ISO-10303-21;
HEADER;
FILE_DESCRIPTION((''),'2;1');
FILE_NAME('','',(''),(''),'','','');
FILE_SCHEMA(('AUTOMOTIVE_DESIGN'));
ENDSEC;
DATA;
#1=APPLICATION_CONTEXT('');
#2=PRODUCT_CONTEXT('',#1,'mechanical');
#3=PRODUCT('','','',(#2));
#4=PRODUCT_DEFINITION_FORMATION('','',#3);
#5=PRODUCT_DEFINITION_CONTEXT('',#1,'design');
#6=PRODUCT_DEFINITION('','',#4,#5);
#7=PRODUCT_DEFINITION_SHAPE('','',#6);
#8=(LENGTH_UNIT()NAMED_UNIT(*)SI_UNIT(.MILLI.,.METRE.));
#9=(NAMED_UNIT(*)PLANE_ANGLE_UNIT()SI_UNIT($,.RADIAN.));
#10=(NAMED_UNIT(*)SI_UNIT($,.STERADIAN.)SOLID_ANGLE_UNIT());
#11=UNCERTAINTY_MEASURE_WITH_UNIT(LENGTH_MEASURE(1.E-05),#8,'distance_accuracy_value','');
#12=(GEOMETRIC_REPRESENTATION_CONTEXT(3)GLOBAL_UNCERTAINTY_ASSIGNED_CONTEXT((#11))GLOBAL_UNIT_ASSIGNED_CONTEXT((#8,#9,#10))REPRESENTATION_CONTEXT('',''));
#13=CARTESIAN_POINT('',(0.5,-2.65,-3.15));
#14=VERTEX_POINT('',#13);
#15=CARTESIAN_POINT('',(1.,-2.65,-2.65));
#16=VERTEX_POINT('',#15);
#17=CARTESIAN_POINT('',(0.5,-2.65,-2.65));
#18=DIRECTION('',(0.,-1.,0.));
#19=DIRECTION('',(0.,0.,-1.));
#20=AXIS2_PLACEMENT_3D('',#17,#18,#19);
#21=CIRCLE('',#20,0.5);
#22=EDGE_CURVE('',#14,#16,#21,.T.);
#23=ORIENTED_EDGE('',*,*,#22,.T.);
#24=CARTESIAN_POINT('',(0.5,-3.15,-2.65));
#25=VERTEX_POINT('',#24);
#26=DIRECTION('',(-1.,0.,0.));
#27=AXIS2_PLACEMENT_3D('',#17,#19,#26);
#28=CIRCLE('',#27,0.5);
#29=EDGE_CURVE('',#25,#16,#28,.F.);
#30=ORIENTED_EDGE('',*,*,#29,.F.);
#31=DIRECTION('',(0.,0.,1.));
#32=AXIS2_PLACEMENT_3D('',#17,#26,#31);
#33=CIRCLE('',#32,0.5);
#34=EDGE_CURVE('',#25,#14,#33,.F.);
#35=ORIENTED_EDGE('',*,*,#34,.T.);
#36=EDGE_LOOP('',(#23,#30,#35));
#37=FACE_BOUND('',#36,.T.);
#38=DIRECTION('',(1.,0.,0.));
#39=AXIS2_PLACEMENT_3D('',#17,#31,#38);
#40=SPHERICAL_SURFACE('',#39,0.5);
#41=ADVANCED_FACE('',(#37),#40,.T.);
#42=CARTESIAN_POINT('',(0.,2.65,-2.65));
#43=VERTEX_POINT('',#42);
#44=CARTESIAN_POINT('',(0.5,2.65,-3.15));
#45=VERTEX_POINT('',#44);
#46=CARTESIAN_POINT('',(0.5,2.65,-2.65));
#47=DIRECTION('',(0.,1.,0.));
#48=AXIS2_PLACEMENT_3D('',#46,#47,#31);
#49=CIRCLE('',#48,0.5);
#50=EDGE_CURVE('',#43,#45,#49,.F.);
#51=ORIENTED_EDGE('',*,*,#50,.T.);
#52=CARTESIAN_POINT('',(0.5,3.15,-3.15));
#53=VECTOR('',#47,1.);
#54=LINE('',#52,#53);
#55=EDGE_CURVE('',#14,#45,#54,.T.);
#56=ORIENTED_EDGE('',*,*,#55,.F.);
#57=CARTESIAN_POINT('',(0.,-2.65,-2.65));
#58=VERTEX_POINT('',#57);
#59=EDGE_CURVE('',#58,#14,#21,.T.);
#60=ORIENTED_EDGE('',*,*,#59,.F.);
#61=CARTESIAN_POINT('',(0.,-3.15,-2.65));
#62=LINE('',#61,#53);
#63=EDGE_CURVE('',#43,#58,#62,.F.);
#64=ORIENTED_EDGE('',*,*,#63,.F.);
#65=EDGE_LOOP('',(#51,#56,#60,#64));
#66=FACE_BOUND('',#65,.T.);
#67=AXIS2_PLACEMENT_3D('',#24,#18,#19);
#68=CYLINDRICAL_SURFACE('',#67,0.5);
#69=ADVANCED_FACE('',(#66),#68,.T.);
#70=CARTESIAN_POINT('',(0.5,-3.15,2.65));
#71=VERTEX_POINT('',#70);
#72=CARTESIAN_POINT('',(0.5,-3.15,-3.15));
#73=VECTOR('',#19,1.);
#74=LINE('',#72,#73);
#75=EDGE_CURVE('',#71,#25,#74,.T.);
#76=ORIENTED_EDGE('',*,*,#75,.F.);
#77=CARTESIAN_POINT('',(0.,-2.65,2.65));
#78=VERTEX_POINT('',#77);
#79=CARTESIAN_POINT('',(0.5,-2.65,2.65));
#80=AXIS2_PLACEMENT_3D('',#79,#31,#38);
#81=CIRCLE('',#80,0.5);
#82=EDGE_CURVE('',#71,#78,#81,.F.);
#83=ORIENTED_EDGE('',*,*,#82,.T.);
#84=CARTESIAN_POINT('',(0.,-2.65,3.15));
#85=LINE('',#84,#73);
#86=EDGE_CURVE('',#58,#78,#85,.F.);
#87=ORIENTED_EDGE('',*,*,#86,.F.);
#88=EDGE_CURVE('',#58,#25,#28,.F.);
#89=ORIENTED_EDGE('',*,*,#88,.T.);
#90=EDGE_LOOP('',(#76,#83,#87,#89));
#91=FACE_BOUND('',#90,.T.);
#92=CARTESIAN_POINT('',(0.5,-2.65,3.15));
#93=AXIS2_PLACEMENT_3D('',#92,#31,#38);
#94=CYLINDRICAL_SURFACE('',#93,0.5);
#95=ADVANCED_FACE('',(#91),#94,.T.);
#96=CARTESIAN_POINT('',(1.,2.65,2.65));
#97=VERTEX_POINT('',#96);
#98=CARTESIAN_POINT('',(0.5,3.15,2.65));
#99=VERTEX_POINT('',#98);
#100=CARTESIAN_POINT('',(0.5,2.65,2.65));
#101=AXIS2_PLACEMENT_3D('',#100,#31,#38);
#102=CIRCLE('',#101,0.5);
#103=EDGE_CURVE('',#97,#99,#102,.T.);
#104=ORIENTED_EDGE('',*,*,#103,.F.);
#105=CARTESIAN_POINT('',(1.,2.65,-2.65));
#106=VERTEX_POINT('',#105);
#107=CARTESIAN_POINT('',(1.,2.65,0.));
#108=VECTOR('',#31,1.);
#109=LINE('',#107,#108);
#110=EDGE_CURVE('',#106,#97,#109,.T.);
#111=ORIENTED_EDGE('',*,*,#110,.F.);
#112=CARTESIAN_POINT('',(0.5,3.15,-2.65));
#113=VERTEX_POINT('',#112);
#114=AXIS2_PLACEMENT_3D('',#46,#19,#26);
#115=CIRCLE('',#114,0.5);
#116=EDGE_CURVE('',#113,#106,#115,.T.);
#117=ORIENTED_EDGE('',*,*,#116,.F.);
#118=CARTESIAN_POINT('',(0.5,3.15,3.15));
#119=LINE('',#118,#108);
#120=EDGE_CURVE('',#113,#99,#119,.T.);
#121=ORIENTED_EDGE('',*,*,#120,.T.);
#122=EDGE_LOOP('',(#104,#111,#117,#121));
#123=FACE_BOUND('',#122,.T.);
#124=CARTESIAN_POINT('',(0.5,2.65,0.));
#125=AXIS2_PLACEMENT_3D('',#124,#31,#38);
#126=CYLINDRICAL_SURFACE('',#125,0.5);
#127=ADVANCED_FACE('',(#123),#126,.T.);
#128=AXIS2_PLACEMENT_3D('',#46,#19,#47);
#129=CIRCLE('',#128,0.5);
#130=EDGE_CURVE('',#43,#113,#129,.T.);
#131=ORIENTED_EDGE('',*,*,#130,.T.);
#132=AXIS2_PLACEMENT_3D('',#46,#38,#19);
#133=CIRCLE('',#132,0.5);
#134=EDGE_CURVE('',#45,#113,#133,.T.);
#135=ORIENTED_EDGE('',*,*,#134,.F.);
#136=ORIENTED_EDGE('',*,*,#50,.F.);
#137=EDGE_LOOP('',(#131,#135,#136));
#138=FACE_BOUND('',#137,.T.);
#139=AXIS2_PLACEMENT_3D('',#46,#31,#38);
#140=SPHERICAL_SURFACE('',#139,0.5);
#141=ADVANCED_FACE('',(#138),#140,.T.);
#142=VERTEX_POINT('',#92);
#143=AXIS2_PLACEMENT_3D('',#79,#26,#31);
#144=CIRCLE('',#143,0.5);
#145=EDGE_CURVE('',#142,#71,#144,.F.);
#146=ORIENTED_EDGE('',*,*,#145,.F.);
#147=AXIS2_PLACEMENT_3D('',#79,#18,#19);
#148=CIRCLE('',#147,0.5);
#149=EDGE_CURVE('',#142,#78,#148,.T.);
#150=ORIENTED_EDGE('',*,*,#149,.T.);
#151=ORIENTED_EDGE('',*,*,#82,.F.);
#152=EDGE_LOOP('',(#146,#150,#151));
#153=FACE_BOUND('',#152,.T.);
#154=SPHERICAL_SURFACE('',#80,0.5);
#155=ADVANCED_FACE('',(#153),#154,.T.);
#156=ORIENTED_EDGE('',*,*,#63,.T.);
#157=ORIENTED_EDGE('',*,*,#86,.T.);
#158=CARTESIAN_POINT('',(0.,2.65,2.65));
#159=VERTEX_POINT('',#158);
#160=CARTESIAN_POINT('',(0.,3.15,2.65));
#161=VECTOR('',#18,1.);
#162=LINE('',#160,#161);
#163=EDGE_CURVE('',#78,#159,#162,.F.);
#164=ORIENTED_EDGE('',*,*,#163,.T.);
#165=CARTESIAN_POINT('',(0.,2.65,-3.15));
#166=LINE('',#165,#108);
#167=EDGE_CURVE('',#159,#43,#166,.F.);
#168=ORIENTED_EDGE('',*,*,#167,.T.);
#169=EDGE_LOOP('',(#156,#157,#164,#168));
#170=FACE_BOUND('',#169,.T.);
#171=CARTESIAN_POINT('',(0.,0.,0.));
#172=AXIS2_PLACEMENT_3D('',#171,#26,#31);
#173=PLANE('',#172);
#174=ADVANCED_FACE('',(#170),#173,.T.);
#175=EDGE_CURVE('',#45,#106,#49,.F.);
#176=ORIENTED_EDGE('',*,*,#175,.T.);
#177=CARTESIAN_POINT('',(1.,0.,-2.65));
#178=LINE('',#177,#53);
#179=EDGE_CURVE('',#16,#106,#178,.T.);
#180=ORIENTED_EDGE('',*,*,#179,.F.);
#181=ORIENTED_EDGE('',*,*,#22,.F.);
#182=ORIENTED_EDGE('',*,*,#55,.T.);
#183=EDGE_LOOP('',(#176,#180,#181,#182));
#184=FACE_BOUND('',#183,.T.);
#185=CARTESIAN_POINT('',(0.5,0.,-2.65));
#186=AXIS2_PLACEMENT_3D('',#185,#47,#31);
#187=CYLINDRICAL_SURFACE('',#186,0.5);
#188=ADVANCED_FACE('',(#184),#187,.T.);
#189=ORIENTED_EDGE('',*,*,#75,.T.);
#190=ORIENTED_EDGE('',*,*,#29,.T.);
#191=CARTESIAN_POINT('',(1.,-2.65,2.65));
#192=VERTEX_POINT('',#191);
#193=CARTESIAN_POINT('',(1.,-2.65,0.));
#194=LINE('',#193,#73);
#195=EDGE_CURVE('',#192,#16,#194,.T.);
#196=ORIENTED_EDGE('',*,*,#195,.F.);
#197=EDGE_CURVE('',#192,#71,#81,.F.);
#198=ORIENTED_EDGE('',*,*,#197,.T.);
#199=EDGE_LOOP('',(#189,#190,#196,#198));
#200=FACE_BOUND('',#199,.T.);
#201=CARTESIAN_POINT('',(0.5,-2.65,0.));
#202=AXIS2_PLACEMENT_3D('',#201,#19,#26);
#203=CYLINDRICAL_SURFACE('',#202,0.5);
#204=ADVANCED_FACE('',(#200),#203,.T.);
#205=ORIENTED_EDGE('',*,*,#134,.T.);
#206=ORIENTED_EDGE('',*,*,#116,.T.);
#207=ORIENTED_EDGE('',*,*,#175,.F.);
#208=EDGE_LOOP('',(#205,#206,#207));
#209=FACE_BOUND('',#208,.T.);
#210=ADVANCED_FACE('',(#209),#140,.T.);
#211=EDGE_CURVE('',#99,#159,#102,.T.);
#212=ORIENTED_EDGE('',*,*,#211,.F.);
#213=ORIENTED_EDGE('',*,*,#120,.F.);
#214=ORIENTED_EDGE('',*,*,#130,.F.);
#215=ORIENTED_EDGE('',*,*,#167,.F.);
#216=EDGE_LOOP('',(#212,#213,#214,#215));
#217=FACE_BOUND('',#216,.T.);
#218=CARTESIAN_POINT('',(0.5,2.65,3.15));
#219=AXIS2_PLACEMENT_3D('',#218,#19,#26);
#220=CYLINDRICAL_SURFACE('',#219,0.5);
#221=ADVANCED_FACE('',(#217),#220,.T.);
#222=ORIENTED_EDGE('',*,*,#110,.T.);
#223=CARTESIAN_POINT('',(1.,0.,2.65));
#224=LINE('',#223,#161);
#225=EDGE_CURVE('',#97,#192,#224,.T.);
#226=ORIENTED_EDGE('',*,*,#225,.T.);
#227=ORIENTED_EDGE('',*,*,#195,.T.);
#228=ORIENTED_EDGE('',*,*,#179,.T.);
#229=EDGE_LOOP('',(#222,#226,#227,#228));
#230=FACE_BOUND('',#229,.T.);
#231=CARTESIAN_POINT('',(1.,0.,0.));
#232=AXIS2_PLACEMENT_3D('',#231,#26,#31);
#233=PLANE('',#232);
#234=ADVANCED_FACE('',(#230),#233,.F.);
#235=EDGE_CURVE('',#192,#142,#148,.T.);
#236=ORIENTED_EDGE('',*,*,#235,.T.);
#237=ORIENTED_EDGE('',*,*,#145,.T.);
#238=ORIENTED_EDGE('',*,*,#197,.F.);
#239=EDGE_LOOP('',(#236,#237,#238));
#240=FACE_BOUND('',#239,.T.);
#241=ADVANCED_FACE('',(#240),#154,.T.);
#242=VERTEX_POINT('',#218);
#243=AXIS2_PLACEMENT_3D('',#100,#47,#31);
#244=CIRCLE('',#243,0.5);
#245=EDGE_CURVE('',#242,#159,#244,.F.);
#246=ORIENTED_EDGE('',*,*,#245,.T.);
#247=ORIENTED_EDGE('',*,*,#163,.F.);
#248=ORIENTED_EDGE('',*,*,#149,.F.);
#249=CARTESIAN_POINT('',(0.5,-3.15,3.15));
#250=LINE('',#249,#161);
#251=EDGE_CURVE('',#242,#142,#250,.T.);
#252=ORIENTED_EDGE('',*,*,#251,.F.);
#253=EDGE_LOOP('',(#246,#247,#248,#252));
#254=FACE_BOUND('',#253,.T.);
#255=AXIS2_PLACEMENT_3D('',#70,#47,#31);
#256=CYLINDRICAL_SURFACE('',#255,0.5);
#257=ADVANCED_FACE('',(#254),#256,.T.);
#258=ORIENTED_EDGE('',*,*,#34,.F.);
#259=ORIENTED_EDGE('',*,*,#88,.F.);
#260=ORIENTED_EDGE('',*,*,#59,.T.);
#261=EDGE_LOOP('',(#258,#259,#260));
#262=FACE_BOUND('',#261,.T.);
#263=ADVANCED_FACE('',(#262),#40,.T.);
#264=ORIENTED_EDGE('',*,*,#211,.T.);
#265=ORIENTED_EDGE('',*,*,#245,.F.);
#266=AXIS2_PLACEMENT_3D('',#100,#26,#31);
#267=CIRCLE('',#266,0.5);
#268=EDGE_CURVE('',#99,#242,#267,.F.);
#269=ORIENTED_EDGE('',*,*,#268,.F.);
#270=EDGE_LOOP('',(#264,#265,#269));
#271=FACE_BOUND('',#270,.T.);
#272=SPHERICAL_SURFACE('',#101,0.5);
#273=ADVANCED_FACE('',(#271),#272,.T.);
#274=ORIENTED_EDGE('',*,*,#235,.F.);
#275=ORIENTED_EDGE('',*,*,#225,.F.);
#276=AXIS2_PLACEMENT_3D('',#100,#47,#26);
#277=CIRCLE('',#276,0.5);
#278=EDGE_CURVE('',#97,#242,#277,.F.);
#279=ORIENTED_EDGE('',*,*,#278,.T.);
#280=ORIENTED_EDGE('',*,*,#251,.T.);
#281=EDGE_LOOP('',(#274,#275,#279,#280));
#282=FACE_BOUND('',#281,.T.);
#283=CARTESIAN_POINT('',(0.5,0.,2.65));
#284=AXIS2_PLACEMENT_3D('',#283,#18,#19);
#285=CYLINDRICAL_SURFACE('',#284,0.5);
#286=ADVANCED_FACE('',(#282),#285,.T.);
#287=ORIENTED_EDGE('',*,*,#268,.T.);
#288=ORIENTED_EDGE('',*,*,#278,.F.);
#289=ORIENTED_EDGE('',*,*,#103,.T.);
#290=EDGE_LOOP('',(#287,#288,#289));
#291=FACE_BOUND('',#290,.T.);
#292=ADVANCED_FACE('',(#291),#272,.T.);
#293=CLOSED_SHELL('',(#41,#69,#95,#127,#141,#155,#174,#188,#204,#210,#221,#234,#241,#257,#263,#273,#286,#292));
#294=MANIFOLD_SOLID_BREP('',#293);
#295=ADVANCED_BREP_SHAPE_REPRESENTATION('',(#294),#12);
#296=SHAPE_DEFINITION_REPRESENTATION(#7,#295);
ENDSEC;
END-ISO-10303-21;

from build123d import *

# Parameters (mm, degrees)
SKETCH1_W           = 6.3
SKETCH1_H           = 6.3
BOSS_EXTRUDE1_DEPTH = 1
FILLET1_R           = 0.5


with BuildPart() as part:
    # Sketch1 → Boss-Extrude1 (new body)
    with BuildSketch(Plane(origin=(0, 0, 0), x_dir=(0, 0, -1), z_dir=(1, 0, 0))):
        Rectangle(SKETCH1_W, SKETCH1_H)
    extrude(amount=BOSS_EXTRUDE1_DEPTH)

    # Fillet1
    fillet1_edges = [part.edges().sort_by_distance(p)[0] for p in [
        (1, 0, 3.15),
        (1, -3.15, 0),
        (1, 0, -3.15),
        (0, -3.15, 0),
        (0, 0, 3.15),
        (0, 3.15, 0),
        (0, 0, -3.15),
        (0.5, -3.15, -3.15),
        (0.5, -3.15, 3.15),
        (0.5, 3.15, 3.15),
        (0.5, 3.15, -3.15),
        (1, 3.15, 0),
    ]]
    fillet(fillet1_edges, radius=FILLET1_R - 0.0001)  # a hair under: the kernel refuses the full size


solid = part.part
